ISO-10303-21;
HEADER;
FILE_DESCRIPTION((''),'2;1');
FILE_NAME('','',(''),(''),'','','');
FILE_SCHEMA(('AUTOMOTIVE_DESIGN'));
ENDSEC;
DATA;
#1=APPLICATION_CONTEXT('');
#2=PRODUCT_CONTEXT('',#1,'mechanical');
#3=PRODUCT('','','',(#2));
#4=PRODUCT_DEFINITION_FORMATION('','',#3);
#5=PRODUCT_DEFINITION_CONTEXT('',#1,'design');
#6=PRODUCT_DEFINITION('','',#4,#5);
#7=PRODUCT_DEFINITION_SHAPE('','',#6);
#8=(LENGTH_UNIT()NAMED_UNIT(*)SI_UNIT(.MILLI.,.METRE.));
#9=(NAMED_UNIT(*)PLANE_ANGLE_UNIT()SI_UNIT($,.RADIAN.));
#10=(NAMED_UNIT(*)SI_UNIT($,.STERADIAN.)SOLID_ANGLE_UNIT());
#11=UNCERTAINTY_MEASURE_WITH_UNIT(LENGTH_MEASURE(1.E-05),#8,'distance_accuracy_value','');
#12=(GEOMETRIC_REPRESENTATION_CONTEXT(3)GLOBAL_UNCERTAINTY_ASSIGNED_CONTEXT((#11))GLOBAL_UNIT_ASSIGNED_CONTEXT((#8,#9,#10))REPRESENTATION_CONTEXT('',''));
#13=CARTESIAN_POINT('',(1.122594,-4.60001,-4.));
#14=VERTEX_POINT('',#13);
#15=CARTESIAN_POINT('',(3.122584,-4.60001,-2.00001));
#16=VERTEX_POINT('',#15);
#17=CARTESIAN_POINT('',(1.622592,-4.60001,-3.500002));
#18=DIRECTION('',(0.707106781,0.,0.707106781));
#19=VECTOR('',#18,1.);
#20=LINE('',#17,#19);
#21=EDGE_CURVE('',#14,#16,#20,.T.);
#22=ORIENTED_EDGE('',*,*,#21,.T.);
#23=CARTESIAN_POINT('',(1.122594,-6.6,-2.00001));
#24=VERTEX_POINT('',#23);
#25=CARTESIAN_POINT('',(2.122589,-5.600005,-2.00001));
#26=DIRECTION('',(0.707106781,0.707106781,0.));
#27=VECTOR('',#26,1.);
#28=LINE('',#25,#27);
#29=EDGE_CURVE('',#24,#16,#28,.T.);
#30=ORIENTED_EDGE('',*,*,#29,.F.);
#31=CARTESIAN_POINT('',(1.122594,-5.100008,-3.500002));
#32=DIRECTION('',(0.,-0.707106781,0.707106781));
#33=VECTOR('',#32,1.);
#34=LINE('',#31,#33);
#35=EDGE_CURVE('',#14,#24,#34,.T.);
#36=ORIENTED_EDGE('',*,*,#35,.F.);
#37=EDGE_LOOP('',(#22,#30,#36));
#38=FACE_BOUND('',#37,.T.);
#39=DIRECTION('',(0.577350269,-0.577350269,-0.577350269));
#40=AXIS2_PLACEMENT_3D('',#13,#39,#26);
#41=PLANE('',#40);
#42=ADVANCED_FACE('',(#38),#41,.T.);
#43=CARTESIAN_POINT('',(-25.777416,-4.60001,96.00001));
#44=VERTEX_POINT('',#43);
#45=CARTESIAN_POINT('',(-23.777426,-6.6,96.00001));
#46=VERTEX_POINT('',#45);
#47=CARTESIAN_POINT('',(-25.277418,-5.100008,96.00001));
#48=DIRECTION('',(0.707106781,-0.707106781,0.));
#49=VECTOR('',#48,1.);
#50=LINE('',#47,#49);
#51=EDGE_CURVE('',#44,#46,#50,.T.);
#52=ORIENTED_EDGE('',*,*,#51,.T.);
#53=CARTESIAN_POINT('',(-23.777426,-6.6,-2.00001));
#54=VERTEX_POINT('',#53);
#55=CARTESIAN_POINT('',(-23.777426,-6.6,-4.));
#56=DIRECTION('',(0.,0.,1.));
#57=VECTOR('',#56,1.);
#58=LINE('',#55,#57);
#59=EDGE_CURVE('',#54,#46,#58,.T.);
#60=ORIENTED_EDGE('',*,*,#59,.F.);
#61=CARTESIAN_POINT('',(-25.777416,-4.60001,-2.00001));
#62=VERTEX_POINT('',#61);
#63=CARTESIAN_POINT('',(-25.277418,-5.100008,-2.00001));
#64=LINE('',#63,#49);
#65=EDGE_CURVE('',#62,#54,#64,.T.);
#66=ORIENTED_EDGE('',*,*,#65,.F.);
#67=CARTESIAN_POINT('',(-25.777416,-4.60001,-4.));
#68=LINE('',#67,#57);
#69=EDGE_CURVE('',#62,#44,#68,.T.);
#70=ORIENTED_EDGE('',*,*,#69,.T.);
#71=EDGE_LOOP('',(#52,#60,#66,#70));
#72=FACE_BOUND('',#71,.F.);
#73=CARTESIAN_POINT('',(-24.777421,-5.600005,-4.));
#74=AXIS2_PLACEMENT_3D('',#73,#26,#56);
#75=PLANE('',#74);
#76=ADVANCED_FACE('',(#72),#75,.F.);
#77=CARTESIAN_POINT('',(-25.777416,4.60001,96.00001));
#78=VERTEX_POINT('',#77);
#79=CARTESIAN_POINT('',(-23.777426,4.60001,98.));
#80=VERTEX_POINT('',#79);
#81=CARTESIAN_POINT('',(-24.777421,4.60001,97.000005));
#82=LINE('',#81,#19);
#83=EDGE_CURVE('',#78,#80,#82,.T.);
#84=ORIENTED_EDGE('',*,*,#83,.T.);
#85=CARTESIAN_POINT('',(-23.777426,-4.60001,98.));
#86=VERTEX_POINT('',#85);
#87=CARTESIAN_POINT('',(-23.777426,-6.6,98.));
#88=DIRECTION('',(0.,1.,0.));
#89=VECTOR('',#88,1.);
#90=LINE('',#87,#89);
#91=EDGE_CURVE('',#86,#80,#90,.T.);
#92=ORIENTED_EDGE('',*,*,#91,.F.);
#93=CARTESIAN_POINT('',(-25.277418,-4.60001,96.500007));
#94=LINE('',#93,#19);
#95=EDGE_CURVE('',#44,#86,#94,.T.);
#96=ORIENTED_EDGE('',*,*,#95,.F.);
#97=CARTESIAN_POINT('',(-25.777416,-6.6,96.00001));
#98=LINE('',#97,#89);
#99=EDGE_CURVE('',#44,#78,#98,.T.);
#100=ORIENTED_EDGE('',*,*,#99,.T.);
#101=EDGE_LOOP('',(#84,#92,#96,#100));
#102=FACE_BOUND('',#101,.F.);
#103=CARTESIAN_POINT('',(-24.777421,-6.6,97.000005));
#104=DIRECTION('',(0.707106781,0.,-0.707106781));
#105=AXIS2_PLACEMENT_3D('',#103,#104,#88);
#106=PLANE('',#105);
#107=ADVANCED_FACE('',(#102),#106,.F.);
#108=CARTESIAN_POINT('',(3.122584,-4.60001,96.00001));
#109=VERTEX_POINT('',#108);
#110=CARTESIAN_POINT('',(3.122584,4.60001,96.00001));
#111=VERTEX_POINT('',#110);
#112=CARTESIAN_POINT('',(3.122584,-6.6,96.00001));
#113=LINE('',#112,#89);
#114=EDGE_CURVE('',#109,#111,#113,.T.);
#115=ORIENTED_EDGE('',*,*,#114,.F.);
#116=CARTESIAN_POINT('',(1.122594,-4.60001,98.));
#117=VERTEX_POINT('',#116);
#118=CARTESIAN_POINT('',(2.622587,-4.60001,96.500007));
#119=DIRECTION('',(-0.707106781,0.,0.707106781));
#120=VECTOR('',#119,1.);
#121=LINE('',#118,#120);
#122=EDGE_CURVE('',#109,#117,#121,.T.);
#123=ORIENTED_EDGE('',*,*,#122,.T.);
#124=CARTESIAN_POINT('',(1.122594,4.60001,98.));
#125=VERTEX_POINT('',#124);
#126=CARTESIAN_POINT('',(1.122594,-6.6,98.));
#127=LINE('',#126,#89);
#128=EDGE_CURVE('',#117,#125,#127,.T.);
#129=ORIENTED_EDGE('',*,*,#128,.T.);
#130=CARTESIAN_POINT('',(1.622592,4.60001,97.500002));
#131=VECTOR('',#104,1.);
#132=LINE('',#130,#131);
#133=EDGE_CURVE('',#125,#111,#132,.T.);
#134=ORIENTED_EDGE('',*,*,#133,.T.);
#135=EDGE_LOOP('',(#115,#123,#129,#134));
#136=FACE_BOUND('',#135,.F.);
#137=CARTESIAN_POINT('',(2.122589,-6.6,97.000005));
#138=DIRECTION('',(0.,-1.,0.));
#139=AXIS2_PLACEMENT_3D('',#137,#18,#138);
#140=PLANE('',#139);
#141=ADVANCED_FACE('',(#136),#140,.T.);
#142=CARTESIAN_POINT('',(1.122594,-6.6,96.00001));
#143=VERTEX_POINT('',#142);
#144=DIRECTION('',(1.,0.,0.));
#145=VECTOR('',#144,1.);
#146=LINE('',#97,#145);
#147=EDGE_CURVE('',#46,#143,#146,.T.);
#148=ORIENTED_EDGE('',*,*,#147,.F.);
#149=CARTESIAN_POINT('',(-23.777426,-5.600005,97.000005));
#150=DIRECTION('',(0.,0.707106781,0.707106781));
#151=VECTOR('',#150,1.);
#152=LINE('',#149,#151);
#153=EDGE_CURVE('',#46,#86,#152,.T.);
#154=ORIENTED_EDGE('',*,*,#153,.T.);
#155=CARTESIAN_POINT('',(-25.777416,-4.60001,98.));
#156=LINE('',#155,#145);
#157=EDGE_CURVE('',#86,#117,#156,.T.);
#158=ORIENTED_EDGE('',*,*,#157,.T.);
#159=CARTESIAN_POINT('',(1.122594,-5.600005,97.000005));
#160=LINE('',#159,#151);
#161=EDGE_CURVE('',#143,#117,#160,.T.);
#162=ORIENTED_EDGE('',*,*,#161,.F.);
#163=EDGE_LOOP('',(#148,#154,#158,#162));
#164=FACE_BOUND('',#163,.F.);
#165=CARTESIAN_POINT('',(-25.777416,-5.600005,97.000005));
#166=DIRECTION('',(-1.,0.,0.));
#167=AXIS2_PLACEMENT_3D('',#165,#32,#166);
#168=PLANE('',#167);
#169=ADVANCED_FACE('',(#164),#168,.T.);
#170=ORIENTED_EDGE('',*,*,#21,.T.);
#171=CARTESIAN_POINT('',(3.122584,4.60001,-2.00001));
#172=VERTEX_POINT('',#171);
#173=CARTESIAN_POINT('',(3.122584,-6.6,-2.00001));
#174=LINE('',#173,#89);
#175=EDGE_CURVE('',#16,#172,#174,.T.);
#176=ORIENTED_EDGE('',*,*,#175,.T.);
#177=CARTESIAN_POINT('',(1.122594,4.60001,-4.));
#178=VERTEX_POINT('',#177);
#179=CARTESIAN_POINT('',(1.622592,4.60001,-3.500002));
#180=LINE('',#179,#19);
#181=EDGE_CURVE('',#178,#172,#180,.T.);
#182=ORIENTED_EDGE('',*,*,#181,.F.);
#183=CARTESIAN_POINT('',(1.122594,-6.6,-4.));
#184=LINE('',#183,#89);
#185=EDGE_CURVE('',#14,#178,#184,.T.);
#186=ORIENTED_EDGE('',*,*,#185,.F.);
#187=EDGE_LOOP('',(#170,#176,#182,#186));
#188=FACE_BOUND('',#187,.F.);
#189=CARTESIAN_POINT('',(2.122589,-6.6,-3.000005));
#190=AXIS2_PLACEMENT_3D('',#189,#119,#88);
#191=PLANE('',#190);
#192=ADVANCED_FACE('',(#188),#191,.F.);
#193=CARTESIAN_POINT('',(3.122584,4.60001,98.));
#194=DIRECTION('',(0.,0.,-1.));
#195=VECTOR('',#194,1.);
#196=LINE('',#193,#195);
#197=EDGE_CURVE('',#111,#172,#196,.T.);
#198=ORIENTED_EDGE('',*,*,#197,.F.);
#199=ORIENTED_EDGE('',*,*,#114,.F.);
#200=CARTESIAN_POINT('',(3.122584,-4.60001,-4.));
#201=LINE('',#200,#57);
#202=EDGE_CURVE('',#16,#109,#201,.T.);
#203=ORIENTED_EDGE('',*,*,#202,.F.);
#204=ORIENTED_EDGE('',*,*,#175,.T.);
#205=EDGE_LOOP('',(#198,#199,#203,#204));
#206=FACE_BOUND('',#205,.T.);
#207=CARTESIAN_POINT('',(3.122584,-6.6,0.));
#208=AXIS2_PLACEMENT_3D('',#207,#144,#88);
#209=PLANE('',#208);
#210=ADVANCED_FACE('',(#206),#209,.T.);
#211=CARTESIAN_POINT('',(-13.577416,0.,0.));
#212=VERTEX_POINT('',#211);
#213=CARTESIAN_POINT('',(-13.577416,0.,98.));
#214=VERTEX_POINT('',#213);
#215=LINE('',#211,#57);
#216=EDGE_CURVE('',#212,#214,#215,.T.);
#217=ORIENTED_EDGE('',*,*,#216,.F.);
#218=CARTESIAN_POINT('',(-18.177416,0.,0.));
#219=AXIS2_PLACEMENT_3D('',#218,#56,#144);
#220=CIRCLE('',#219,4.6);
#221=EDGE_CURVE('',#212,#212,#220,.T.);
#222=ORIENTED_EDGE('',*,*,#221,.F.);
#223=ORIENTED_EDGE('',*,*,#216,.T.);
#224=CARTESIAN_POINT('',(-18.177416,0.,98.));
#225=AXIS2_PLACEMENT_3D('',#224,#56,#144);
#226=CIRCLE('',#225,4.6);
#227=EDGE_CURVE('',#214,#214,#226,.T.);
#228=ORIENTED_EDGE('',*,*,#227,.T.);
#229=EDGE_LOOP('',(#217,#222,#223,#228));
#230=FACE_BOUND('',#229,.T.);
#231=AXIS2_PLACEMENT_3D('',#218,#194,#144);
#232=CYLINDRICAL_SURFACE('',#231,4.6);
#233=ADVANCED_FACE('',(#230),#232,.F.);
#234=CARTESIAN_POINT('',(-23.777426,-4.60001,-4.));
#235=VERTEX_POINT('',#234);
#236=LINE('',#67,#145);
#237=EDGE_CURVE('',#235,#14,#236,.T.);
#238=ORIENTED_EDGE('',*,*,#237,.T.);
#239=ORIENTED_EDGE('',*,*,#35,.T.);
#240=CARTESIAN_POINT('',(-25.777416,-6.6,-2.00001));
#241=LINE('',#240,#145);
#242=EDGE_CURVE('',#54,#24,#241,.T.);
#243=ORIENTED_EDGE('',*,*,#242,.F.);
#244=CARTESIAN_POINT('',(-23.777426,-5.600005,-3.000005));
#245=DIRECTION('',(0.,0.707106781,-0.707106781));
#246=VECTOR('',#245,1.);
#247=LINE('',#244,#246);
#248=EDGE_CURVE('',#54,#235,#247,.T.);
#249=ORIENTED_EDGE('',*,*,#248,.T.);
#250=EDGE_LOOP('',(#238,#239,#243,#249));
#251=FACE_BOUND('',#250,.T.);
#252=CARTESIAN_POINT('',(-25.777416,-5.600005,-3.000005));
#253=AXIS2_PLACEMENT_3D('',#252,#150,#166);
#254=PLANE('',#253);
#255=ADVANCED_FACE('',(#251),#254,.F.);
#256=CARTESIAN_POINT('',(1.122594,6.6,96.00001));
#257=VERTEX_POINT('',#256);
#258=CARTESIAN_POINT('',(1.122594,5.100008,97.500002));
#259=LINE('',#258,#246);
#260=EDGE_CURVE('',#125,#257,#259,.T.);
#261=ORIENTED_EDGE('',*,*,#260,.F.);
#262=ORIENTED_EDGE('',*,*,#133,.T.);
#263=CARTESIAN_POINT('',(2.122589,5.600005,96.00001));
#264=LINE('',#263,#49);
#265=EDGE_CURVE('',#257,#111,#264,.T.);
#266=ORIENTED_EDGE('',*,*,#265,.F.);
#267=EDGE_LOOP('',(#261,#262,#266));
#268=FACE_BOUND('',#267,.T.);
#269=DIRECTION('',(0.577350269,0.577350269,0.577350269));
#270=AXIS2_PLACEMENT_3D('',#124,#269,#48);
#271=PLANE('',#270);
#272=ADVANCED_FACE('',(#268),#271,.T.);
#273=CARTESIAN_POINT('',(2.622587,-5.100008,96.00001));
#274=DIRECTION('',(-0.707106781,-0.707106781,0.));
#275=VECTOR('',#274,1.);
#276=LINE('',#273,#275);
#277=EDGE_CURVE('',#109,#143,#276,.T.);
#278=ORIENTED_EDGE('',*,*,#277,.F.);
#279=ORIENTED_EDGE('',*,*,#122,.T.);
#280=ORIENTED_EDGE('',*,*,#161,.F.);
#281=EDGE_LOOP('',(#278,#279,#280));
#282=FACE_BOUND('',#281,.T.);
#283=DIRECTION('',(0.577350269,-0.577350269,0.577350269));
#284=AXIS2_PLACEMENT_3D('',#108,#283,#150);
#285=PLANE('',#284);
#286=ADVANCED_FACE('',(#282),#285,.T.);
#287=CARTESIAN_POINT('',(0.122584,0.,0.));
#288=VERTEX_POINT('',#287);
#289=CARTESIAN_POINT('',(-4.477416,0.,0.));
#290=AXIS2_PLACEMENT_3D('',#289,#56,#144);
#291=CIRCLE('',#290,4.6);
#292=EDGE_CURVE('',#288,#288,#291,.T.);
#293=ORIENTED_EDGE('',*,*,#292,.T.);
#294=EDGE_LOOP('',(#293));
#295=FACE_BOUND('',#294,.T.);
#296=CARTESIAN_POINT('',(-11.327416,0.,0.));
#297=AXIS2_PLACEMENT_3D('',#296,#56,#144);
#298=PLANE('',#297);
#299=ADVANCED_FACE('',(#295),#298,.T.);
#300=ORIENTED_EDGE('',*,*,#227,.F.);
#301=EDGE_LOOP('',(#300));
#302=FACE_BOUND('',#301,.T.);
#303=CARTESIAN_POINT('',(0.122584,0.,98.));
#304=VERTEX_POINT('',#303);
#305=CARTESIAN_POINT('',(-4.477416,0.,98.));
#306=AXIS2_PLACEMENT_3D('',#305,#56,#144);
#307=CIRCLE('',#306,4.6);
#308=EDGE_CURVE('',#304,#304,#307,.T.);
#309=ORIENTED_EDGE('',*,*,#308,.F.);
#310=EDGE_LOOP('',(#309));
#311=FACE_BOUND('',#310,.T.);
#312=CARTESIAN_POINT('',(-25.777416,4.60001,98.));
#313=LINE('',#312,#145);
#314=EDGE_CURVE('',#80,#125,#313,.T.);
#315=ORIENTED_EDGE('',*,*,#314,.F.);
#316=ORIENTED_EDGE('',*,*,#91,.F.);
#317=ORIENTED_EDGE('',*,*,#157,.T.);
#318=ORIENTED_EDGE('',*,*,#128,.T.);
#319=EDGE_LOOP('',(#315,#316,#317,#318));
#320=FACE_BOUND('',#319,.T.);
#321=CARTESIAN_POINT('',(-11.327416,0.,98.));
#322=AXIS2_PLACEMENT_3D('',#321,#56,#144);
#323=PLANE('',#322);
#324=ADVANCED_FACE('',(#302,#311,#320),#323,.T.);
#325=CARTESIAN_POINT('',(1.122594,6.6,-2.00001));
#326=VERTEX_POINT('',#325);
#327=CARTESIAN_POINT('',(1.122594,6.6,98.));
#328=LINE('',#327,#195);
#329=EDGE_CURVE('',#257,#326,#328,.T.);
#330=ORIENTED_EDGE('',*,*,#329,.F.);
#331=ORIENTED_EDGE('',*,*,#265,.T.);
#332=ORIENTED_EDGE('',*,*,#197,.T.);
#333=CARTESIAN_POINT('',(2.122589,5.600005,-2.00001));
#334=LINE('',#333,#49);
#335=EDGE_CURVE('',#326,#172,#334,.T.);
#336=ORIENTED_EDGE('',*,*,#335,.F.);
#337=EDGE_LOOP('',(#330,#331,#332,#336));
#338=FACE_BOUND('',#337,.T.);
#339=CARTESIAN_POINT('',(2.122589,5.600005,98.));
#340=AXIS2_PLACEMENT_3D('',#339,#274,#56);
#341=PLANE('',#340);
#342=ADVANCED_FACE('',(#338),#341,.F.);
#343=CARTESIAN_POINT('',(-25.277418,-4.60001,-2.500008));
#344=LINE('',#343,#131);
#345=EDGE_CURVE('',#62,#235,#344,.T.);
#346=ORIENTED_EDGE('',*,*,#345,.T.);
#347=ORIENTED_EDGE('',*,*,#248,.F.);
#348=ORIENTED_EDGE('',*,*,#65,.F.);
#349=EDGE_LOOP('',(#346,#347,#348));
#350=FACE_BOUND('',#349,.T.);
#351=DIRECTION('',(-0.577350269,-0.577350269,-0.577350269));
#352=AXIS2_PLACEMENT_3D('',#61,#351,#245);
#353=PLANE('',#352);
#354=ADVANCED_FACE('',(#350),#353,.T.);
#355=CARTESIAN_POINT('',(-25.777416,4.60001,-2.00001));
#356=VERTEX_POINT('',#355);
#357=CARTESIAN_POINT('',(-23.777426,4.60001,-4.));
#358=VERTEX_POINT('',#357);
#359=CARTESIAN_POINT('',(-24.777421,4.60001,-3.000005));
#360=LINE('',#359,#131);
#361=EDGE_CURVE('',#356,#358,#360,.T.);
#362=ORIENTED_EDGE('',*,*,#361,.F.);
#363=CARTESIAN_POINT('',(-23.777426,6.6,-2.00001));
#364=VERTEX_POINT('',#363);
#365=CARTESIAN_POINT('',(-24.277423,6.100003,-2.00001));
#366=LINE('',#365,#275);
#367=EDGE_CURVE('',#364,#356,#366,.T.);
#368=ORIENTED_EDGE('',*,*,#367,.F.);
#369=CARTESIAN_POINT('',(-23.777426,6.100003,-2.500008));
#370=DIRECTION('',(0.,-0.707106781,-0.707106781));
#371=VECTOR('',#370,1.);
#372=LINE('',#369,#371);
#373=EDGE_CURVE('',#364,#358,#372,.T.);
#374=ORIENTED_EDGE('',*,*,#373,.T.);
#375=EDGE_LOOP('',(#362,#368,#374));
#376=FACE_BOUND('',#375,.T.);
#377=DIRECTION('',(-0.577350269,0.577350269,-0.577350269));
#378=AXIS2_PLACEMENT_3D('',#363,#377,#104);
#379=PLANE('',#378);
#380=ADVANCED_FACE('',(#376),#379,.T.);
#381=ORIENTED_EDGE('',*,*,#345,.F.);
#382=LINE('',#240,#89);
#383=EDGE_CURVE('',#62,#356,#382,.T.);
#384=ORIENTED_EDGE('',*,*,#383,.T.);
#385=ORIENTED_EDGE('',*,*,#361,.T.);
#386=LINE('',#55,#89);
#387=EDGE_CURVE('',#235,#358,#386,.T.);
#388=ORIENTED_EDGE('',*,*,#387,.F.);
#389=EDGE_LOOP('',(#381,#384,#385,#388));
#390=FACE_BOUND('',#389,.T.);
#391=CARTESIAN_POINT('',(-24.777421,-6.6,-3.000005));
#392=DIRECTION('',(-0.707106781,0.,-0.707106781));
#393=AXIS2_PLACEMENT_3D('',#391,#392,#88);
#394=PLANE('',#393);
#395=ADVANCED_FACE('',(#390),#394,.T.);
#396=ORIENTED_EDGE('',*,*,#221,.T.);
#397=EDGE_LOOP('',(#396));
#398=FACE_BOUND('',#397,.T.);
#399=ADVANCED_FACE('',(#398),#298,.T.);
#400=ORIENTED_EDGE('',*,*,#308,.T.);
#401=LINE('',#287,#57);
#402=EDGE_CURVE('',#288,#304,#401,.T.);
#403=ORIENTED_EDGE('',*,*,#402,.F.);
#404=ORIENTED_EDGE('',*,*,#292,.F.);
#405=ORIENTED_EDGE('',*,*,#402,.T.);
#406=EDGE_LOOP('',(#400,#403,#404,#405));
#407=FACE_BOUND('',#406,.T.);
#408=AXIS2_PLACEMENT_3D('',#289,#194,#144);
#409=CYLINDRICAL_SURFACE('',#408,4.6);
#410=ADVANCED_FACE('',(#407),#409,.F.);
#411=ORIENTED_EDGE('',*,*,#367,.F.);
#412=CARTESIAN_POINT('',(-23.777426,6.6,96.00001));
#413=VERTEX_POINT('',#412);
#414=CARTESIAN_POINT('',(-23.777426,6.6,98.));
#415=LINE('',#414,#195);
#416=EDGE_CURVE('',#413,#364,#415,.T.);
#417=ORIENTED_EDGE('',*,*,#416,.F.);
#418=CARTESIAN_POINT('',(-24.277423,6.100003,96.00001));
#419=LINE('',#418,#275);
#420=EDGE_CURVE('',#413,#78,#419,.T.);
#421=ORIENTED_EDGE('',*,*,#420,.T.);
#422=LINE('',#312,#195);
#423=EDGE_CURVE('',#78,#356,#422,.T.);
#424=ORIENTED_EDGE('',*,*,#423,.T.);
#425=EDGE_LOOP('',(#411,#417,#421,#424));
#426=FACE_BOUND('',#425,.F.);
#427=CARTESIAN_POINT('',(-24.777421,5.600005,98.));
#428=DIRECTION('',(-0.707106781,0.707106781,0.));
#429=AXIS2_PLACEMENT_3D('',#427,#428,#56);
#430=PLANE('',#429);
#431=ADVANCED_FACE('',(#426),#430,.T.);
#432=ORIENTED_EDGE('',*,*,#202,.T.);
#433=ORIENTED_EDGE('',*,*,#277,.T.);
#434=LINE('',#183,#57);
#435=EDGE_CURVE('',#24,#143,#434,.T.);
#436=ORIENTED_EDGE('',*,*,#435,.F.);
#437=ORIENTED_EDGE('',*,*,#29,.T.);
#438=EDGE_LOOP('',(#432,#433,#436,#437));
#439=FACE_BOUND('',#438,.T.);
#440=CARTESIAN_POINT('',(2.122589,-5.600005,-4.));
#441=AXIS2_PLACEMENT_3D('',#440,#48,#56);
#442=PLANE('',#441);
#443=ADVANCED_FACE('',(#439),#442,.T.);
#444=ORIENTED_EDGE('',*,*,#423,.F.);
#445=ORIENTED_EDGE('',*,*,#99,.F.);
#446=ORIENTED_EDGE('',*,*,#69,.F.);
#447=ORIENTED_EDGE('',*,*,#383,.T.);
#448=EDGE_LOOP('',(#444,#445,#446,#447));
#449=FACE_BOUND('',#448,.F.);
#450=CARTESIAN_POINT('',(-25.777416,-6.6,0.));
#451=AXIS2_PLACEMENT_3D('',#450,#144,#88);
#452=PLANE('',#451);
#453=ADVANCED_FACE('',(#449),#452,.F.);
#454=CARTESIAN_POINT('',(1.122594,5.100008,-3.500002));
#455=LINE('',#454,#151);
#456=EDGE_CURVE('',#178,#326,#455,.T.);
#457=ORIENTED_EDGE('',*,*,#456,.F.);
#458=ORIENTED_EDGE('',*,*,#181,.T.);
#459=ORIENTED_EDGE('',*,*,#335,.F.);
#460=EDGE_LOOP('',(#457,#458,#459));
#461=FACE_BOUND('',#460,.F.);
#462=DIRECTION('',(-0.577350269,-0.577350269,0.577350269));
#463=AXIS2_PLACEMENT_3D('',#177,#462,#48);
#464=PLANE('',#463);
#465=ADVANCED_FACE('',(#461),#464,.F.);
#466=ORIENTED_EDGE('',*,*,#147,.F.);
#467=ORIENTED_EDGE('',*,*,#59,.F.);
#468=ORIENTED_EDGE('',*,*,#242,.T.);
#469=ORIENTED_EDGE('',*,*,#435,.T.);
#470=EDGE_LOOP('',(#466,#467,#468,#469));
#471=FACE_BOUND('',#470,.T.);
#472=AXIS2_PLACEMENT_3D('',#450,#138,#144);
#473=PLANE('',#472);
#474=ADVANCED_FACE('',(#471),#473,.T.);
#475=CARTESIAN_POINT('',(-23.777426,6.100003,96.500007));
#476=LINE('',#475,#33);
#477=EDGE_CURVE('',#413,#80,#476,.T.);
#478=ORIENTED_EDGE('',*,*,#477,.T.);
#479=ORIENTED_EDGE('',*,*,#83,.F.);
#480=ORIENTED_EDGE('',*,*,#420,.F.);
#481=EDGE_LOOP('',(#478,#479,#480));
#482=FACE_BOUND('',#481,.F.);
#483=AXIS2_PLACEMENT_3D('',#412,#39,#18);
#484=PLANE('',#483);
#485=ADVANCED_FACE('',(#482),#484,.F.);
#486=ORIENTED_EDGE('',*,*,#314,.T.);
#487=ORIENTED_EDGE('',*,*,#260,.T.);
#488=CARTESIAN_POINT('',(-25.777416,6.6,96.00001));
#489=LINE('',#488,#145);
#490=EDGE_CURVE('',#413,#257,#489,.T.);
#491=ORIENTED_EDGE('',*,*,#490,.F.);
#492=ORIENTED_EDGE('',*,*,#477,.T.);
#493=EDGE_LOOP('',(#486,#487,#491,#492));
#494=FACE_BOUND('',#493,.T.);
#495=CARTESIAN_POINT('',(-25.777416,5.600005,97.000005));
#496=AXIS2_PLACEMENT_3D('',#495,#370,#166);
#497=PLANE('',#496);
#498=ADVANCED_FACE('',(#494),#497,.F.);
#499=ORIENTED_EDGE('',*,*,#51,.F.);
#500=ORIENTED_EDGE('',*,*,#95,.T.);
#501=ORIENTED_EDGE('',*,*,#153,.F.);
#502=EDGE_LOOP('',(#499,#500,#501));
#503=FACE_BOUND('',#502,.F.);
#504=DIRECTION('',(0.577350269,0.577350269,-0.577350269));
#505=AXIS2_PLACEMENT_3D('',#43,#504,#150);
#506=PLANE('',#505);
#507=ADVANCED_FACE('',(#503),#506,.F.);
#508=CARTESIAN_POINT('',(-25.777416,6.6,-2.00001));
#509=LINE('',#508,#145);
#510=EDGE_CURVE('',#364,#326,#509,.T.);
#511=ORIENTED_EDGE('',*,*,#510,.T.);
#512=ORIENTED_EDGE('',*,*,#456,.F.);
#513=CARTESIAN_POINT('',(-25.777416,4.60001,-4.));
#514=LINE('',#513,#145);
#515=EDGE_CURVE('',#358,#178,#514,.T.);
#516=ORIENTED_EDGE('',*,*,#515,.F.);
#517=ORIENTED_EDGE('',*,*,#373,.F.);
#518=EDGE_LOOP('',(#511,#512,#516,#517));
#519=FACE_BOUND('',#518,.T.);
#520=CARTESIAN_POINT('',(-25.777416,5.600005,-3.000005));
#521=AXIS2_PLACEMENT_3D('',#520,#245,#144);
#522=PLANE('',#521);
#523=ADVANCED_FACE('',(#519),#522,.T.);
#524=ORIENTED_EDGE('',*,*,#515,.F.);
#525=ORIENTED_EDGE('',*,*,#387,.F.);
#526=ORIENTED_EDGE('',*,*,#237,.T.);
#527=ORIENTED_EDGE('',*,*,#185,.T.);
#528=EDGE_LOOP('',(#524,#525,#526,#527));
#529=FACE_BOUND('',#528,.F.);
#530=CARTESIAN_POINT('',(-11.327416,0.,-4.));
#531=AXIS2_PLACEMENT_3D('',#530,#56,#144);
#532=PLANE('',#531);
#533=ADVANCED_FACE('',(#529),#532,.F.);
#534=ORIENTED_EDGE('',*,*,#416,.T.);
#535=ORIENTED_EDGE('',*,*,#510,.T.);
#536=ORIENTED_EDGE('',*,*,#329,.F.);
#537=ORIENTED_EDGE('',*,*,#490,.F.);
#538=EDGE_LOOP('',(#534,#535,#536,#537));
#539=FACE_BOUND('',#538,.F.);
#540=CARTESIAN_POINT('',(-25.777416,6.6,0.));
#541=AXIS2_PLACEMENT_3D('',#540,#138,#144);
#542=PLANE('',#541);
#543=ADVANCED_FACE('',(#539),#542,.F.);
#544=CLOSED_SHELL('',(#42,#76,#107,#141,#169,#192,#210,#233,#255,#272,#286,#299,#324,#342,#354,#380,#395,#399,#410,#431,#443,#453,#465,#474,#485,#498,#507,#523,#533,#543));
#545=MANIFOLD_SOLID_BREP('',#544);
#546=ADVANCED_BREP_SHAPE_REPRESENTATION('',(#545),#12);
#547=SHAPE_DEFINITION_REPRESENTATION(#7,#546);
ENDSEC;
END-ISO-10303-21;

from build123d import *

# Parameters (mm, degrees)
F0_W     = 28.9
F0_H     = 13.2
F0_R     = 4.6
F1_DEPTH = 98
F2_DEPTH = 4
F3_SIZE  = 1.99999


# Not quite as in the source:
# - a fillet or chamfer is up to 0.001 mm smaller than in the source, because OpenCascade refuses the exact size


with BuildPart() as f1:
    # F0 (on Top) → F1 (new body)
    with BuildSketch(Plane.XY):
        with Locations((-11.3274157623, 0)):
            Rectangle(F0_W, F0_H)
        with Locations((-18.1774157623, 0)):
            Circle(F0_R, mode=Mode.SUBTRACT)
        with Locations((-4.4774157623, 0)):
            Circle(F0_R, mode=Mode.SUBTRACT)
    extrude(amount=F1_DEPTH)

    # F0 (on Top) → F2 (join)
    with BuildSketch(Plane.XY):
        with Locations((-11.3274157623, 0)):
            Rectangle(F0_W, F0_H)
        with Locations((-18.1774157623, 0)):
            Circle(F0_R, mode=Mode.SUBTRACT)
        with Locations((-4.4774157623, 0)):
            Circle(F0_R, mode=Mode.SUBTRACT)
        with Locations((-4.4774157623, 0)):
            Circle(F0_R)
        with Locations((-18.1774157623, 0)):
            Circle(F0_R)
    extrude(amount=-F2_DEPTH)

    # F3 (size 2 in the source; OpenCascade refuses exactly that, so slightly less here)
    f3_edges = [f1.edges().sort_by_distance(p)[0] for p in [
        (-11.327416, -6.6, 98),
        (3.122584, -6.6, 47),
        (-11.327416, -6.6, -4),
        (-25.777416, -6.6, 47),
        (-25.777416, 0, 98),
        (-25.777416, 0, -4),
        (-25.777416, 6.6, 47),
        (3.122584, 6.6, 47),
        (-11.327416, 6.6, 98),
        (-11.327416, 6.6, -4),
        (3.122584, 0, 98),
        (3.122584, 0, -4),
    ]]
    chamfer(f3_edges, length=F3_SIZE)


solid = f1.part
